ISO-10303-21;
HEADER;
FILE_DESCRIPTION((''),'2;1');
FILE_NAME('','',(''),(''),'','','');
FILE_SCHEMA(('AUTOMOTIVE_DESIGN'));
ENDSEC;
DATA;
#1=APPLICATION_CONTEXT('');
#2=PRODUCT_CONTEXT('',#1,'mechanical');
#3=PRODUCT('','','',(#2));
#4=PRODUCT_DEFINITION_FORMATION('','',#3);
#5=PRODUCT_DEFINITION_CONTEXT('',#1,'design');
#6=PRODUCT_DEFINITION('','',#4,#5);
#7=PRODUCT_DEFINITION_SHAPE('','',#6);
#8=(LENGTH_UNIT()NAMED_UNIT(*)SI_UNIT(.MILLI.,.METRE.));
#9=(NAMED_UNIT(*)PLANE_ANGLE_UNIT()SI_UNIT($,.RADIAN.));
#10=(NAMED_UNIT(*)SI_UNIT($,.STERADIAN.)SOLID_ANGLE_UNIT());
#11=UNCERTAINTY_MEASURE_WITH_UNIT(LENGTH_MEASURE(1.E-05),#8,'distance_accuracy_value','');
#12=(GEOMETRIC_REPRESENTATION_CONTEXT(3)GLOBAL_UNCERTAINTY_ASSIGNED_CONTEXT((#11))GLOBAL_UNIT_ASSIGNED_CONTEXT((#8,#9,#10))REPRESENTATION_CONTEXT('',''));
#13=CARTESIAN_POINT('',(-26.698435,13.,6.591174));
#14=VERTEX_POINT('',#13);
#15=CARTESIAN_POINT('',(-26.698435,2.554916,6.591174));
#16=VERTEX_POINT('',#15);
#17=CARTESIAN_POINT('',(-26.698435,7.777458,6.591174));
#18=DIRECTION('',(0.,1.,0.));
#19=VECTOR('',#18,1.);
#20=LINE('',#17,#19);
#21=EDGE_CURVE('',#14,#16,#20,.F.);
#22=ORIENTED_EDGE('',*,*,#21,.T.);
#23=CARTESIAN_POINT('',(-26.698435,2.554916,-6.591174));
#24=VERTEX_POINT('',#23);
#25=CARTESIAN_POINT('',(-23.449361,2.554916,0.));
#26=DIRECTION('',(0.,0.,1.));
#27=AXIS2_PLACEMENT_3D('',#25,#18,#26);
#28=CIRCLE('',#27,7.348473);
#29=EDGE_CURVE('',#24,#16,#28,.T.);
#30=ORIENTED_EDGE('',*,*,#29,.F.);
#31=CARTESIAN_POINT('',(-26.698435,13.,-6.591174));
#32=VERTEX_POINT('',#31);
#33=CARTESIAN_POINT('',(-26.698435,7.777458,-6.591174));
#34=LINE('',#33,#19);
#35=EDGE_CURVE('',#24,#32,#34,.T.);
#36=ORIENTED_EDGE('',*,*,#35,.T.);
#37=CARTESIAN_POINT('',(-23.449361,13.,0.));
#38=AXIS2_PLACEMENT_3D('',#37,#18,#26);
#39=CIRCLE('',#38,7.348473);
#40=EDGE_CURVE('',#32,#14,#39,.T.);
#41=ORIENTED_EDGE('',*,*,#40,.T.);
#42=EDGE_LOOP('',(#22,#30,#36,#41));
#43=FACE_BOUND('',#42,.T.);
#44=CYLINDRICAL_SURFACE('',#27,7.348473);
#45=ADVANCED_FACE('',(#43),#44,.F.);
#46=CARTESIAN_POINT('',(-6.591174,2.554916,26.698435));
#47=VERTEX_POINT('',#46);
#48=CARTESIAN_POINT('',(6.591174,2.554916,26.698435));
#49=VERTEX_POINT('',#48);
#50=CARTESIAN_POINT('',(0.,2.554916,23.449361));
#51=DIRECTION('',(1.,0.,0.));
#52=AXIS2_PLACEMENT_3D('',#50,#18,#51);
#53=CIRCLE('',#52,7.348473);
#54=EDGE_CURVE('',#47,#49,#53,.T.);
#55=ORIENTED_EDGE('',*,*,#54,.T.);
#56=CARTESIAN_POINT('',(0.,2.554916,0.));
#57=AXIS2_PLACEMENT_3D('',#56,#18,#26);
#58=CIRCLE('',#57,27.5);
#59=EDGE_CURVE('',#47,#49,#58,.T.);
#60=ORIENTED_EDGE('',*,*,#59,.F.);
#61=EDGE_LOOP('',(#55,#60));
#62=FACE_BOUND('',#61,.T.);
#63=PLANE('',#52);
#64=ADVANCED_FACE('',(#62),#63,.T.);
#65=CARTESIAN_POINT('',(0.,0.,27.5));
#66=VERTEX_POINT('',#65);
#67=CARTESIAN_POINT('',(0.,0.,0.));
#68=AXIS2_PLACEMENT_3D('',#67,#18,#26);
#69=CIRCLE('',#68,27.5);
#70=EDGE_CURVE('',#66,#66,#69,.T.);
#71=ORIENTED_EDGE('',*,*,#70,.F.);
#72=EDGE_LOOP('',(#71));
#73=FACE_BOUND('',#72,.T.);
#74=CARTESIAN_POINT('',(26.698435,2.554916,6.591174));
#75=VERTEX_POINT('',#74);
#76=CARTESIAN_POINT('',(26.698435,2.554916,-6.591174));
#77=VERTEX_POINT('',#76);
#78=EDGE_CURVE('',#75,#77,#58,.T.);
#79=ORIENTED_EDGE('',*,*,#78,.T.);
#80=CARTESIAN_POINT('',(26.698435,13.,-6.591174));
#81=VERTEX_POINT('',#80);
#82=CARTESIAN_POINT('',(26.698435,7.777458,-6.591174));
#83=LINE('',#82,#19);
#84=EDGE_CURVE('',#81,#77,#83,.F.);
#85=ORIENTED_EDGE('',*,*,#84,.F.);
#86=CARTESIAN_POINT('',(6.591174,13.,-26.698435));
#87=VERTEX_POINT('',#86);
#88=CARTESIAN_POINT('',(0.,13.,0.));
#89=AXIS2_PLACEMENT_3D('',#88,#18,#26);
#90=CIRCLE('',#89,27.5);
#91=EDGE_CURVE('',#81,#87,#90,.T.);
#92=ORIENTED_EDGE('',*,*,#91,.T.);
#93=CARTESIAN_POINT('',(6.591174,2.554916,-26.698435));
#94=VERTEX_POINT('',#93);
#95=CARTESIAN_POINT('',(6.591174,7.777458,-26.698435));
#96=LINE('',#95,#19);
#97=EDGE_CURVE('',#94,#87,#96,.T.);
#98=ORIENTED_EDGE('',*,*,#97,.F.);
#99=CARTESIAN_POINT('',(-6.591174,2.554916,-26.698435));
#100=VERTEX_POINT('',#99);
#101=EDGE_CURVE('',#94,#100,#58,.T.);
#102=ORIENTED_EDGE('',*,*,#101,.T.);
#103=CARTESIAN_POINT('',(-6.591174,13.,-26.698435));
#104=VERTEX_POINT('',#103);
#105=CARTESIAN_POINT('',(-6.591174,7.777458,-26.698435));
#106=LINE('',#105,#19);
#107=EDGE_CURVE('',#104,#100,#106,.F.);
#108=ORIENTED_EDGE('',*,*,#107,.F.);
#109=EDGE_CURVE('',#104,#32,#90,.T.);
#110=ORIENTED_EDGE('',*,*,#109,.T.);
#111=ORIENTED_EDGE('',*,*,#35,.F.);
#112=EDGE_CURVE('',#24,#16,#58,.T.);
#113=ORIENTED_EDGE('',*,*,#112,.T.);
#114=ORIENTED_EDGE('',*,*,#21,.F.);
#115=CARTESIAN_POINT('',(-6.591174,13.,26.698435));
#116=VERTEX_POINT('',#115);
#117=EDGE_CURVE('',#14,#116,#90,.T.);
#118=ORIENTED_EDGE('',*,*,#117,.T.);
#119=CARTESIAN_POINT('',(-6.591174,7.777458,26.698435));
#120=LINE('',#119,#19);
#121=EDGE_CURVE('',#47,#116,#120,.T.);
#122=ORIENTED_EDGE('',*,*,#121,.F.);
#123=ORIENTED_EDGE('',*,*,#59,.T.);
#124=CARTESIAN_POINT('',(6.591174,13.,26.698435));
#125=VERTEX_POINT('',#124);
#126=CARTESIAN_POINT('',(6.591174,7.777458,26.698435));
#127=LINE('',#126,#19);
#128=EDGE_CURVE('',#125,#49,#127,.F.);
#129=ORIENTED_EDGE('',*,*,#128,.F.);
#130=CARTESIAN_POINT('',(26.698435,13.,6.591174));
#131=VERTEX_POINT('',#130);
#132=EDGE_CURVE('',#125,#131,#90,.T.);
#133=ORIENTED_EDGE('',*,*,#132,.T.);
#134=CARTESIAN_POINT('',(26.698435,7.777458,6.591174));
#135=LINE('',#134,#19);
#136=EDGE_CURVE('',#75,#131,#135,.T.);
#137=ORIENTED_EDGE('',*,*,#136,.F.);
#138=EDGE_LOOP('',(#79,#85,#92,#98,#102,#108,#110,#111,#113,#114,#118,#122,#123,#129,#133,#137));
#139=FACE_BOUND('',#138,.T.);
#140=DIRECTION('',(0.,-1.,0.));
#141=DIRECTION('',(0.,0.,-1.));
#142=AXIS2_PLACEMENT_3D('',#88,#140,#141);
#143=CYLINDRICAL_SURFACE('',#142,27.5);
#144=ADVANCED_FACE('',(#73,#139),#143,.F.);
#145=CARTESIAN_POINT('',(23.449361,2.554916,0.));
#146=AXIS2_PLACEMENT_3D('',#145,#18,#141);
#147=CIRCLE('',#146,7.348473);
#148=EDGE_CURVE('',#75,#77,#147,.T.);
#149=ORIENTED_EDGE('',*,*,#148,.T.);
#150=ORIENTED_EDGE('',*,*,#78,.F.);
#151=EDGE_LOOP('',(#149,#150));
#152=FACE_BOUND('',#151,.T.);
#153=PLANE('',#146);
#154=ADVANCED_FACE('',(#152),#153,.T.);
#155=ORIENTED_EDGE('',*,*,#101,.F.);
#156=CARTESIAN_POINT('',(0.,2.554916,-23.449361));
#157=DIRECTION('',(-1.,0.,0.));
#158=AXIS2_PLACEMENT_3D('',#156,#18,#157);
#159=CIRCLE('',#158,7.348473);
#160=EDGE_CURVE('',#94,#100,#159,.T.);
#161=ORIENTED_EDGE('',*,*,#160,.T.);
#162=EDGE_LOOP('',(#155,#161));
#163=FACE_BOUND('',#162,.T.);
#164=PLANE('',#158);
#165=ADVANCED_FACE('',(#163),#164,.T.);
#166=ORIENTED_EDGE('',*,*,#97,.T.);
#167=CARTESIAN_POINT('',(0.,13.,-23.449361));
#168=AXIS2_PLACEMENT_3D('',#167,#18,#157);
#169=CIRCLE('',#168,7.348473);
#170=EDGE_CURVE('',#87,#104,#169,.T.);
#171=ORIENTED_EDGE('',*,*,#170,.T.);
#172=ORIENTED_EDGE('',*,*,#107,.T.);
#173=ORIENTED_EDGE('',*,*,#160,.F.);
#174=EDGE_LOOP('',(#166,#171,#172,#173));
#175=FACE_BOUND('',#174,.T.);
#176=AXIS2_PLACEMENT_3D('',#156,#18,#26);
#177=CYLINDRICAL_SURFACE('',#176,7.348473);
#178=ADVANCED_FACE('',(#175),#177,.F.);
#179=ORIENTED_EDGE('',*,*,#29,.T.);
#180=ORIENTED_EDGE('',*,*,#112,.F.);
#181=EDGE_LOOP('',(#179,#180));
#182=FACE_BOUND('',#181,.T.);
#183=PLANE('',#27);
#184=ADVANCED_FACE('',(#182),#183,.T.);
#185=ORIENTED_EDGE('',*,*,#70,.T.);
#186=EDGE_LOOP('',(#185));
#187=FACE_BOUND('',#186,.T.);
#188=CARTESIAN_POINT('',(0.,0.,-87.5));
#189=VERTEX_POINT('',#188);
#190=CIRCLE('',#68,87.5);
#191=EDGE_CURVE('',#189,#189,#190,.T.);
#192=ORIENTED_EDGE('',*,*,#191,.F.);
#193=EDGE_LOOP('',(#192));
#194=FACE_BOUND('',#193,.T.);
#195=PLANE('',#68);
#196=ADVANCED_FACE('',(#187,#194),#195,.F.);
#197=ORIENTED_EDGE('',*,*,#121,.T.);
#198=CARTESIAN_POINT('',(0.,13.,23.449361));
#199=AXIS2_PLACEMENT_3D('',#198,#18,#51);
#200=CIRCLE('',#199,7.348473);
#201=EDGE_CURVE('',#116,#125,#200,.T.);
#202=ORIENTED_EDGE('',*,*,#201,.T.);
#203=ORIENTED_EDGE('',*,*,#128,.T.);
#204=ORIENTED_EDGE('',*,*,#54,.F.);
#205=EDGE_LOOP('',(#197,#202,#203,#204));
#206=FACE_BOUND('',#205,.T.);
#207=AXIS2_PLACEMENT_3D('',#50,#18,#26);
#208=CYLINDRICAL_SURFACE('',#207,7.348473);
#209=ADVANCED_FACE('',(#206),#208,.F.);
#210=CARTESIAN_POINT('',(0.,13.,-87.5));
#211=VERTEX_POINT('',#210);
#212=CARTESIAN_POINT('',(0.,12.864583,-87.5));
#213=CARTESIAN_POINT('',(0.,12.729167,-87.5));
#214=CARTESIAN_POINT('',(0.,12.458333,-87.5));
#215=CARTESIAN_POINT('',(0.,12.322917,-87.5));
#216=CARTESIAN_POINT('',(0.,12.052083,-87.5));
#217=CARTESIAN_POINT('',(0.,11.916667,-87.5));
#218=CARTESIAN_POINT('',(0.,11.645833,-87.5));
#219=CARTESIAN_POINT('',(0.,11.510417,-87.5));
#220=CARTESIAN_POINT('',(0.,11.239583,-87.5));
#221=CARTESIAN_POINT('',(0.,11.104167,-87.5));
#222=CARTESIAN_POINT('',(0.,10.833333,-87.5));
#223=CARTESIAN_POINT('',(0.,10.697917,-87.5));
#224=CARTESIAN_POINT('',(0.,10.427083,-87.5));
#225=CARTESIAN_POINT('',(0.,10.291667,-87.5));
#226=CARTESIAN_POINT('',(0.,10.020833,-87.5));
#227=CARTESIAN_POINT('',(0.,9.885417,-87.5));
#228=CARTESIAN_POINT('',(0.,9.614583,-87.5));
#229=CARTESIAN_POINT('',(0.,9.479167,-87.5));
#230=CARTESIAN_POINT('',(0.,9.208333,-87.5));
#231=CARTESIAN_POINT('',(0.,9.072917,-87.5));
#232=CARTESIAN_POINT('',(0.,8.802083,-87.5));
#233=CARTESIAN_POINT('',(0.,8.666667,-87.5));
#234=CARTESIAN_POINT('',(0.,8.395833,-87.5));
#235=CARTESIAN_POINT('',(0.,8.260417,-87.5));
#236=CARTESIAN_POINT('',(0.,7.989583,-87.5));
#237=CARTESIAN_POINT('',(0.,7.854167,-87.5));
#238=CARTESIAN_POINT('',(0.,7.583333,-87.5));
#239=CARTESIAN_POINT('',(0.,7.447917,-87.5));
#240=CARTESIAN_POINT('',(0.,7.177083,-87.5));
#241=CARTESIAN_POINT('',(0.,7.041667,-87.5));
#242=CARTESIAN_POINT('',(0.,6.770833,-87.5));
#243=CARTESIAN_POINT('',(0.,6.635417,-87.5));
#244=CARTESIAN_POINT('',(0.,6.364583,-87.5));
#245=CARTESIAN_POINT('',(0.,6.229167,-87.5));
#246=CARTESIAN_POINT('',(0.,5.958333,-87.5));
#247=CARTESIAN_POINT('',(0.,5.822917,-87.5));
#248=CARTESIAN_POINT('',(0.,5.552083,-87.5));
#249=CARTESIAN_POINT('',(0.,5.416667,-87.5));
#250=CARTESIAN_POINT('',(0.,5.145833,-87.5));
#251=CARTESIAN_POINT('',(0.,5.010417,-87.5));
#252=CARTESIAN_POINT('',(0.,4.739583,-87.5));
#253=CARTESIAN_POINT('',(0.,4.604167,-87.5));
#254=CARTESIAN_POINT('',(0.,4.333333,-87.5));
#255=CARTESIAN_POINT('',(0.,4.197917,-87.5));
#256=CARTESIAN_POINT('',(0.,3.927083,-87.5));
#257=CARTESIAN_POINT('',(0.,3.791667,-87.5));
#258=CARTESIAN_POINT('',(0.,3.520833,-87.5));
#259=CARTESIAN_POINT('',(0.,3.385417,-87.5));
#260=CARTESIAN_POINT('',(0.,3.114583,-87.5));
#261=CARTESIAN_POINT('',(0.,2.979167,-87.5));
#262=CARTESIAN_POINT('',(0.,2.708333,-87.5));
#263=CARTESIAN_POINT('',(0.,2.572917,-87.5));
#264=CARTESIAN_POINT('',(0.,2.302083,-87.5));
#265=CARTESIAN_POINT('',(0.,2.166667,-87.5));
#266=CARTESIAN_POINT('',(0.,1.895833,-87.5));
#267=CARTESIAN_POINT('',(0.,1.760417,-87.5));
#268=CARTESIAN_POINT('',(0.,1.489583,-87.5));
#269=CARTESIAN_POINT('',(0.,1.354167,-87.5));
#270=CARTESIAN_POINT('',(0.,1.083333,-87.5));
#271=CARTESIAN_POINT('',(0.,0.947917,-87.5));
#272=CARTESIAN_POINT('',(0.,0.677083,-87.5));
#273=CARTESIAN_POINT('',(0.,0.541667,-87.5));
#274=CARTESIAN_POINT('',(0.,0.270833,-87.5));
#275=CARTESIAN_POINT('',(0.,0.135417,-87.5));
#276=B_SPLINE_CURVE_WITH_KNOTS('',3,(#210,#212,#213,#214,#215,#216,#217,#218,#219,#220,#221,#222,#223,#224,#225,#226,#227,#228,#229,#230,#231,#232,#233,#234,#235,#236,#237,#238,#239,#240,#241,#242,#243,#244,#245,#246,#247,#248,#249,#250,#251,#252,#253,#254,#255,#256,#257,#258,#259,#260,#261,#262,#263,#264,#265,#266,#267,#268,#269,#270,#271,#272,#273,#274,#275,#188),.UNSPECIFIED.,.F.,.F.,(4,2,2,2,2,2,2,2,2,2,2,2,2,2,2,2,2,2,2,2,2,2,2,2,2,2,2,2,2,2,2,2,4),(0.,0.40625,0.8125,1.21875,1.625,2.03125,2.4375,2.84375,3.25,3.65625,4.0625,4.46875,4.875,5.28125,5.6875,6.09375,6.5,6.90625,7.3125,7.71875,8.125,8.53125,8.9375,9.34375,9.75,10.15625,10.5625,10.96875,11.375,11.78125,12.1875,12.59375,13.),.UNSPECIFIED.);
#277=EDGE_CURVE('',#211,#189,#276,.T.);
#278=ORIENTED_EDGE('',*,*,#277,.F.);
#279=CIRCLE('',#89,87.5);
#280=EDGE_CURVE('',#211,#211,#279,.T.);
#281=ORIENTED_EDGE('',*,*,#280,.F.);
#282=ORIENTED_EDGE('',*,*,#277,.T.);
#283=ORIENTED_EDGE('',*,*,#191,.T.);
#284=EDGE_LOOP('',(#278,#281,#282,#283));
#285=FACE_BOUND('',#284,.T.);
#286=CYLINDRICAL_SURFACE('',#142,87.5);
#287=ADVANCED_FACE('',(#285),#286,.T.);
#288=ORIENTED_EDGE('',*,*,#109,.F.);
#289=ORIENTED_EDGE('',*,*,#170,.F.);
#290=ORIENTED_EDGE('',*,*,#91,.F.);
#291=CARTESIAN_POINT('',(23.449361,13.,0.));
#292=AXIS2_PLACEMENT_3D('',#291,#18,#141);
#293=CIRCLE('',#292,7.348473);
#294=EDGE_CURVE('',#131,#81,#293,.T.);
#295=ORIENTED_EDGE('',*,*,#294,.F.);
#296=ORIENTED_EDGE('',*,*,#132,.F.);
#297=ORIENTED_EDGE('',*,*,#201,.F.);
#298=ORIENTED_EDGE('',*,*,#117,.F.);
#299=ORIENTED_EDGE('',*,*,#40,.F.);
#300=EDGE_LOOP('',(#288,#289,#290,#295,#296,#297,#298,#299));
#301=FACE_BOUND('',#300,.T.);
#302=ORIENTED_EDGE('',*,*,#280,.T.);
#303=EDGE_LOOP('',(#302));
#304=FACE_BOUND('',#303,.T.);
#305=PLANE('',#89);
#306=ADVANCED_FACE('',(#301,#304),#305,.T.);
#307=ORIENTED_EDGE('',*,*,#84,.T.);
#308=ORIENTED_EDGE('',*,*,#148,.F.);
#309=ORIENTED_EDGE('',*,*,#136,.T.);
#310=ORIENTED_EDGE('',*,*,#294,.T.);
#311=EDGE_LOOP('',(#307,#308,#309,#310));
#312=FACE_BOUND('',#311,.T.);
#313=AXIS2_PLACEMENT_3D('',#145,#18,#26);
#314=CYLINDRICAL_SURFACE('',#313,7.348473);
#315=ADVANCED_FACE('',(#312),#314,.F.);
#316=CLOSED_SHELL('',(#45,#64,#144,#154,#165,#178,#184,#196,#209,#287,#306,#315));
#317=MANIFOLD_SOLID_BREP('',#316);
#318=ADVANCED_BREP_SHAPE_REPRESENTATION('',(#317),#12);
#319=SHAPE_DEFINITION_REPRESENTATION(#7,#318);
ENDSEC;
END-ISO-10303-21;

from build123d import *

# Parameters (mm, degrees)
SKETCH1_R           = 87.5
BOSS_EXTRUDE1_DEPTH = 13
SKETCH2_R           = 27.5
CUT_EXTRUDE1_DEPTH  = 125.424676009
SKETCH3_R           = 7.348472637
CUT_EXTRUDE2_DEPTH  = 10.445084197
CIRPATTERN1_COUNT   = 4


with BuildPart() as part:
    # Sketch1 → Boss-Extrude1 (new body)
    with BuildSketch(Plane(origin=(0, 0, 0), x_dir=(1, 0, 0), z_dir=(0, 1, 0))):
        Circle(SKETCH1_R)
    extrude(amount=BOSS_EXTRUDE1_DEPTH)

    # Sketch2 → Cut-Extrude1 (cut, through all)
    with BuildSketch(Plane(origin=(0, 0, 0), x_dir=(1, 0, 0), z_dir=(0, 1, 0))):
        Circle(SKETCH2_R)
    extrude(amount=CUT_EXTRUDE1_DEPTH, mode=Mode.SUBTRACT)

    # Sketch3 → Cut-Extrude2 (cut)
    with BuildSketch(Plane(origin=(0, 13, 0), x_dir=(1, 0, 0), z_dir=(0, 1, 0))):
        with Locations((-23.449361097, 0)):
            Circle(SKETCH3_R)
    cut_extrude2 = extrude(amount=-CUT_EXTRUDE2_DEPTH, mode=Mode.SUBTRACT)

    # CirPattern1: Cut-Extrude2 ×4 about axis
    cirpattern1_axis = Axis((0, 0, 0), (0, 1, 0))
    for i in range(1, CIRPATTERN1_COUNT):
        add(cut_extrude2.rotate(cirpattern1_axis, i * 360 / CIRPATTERN1_COUNT), mode=Mode.SUBTRACT)


solid = part.part
